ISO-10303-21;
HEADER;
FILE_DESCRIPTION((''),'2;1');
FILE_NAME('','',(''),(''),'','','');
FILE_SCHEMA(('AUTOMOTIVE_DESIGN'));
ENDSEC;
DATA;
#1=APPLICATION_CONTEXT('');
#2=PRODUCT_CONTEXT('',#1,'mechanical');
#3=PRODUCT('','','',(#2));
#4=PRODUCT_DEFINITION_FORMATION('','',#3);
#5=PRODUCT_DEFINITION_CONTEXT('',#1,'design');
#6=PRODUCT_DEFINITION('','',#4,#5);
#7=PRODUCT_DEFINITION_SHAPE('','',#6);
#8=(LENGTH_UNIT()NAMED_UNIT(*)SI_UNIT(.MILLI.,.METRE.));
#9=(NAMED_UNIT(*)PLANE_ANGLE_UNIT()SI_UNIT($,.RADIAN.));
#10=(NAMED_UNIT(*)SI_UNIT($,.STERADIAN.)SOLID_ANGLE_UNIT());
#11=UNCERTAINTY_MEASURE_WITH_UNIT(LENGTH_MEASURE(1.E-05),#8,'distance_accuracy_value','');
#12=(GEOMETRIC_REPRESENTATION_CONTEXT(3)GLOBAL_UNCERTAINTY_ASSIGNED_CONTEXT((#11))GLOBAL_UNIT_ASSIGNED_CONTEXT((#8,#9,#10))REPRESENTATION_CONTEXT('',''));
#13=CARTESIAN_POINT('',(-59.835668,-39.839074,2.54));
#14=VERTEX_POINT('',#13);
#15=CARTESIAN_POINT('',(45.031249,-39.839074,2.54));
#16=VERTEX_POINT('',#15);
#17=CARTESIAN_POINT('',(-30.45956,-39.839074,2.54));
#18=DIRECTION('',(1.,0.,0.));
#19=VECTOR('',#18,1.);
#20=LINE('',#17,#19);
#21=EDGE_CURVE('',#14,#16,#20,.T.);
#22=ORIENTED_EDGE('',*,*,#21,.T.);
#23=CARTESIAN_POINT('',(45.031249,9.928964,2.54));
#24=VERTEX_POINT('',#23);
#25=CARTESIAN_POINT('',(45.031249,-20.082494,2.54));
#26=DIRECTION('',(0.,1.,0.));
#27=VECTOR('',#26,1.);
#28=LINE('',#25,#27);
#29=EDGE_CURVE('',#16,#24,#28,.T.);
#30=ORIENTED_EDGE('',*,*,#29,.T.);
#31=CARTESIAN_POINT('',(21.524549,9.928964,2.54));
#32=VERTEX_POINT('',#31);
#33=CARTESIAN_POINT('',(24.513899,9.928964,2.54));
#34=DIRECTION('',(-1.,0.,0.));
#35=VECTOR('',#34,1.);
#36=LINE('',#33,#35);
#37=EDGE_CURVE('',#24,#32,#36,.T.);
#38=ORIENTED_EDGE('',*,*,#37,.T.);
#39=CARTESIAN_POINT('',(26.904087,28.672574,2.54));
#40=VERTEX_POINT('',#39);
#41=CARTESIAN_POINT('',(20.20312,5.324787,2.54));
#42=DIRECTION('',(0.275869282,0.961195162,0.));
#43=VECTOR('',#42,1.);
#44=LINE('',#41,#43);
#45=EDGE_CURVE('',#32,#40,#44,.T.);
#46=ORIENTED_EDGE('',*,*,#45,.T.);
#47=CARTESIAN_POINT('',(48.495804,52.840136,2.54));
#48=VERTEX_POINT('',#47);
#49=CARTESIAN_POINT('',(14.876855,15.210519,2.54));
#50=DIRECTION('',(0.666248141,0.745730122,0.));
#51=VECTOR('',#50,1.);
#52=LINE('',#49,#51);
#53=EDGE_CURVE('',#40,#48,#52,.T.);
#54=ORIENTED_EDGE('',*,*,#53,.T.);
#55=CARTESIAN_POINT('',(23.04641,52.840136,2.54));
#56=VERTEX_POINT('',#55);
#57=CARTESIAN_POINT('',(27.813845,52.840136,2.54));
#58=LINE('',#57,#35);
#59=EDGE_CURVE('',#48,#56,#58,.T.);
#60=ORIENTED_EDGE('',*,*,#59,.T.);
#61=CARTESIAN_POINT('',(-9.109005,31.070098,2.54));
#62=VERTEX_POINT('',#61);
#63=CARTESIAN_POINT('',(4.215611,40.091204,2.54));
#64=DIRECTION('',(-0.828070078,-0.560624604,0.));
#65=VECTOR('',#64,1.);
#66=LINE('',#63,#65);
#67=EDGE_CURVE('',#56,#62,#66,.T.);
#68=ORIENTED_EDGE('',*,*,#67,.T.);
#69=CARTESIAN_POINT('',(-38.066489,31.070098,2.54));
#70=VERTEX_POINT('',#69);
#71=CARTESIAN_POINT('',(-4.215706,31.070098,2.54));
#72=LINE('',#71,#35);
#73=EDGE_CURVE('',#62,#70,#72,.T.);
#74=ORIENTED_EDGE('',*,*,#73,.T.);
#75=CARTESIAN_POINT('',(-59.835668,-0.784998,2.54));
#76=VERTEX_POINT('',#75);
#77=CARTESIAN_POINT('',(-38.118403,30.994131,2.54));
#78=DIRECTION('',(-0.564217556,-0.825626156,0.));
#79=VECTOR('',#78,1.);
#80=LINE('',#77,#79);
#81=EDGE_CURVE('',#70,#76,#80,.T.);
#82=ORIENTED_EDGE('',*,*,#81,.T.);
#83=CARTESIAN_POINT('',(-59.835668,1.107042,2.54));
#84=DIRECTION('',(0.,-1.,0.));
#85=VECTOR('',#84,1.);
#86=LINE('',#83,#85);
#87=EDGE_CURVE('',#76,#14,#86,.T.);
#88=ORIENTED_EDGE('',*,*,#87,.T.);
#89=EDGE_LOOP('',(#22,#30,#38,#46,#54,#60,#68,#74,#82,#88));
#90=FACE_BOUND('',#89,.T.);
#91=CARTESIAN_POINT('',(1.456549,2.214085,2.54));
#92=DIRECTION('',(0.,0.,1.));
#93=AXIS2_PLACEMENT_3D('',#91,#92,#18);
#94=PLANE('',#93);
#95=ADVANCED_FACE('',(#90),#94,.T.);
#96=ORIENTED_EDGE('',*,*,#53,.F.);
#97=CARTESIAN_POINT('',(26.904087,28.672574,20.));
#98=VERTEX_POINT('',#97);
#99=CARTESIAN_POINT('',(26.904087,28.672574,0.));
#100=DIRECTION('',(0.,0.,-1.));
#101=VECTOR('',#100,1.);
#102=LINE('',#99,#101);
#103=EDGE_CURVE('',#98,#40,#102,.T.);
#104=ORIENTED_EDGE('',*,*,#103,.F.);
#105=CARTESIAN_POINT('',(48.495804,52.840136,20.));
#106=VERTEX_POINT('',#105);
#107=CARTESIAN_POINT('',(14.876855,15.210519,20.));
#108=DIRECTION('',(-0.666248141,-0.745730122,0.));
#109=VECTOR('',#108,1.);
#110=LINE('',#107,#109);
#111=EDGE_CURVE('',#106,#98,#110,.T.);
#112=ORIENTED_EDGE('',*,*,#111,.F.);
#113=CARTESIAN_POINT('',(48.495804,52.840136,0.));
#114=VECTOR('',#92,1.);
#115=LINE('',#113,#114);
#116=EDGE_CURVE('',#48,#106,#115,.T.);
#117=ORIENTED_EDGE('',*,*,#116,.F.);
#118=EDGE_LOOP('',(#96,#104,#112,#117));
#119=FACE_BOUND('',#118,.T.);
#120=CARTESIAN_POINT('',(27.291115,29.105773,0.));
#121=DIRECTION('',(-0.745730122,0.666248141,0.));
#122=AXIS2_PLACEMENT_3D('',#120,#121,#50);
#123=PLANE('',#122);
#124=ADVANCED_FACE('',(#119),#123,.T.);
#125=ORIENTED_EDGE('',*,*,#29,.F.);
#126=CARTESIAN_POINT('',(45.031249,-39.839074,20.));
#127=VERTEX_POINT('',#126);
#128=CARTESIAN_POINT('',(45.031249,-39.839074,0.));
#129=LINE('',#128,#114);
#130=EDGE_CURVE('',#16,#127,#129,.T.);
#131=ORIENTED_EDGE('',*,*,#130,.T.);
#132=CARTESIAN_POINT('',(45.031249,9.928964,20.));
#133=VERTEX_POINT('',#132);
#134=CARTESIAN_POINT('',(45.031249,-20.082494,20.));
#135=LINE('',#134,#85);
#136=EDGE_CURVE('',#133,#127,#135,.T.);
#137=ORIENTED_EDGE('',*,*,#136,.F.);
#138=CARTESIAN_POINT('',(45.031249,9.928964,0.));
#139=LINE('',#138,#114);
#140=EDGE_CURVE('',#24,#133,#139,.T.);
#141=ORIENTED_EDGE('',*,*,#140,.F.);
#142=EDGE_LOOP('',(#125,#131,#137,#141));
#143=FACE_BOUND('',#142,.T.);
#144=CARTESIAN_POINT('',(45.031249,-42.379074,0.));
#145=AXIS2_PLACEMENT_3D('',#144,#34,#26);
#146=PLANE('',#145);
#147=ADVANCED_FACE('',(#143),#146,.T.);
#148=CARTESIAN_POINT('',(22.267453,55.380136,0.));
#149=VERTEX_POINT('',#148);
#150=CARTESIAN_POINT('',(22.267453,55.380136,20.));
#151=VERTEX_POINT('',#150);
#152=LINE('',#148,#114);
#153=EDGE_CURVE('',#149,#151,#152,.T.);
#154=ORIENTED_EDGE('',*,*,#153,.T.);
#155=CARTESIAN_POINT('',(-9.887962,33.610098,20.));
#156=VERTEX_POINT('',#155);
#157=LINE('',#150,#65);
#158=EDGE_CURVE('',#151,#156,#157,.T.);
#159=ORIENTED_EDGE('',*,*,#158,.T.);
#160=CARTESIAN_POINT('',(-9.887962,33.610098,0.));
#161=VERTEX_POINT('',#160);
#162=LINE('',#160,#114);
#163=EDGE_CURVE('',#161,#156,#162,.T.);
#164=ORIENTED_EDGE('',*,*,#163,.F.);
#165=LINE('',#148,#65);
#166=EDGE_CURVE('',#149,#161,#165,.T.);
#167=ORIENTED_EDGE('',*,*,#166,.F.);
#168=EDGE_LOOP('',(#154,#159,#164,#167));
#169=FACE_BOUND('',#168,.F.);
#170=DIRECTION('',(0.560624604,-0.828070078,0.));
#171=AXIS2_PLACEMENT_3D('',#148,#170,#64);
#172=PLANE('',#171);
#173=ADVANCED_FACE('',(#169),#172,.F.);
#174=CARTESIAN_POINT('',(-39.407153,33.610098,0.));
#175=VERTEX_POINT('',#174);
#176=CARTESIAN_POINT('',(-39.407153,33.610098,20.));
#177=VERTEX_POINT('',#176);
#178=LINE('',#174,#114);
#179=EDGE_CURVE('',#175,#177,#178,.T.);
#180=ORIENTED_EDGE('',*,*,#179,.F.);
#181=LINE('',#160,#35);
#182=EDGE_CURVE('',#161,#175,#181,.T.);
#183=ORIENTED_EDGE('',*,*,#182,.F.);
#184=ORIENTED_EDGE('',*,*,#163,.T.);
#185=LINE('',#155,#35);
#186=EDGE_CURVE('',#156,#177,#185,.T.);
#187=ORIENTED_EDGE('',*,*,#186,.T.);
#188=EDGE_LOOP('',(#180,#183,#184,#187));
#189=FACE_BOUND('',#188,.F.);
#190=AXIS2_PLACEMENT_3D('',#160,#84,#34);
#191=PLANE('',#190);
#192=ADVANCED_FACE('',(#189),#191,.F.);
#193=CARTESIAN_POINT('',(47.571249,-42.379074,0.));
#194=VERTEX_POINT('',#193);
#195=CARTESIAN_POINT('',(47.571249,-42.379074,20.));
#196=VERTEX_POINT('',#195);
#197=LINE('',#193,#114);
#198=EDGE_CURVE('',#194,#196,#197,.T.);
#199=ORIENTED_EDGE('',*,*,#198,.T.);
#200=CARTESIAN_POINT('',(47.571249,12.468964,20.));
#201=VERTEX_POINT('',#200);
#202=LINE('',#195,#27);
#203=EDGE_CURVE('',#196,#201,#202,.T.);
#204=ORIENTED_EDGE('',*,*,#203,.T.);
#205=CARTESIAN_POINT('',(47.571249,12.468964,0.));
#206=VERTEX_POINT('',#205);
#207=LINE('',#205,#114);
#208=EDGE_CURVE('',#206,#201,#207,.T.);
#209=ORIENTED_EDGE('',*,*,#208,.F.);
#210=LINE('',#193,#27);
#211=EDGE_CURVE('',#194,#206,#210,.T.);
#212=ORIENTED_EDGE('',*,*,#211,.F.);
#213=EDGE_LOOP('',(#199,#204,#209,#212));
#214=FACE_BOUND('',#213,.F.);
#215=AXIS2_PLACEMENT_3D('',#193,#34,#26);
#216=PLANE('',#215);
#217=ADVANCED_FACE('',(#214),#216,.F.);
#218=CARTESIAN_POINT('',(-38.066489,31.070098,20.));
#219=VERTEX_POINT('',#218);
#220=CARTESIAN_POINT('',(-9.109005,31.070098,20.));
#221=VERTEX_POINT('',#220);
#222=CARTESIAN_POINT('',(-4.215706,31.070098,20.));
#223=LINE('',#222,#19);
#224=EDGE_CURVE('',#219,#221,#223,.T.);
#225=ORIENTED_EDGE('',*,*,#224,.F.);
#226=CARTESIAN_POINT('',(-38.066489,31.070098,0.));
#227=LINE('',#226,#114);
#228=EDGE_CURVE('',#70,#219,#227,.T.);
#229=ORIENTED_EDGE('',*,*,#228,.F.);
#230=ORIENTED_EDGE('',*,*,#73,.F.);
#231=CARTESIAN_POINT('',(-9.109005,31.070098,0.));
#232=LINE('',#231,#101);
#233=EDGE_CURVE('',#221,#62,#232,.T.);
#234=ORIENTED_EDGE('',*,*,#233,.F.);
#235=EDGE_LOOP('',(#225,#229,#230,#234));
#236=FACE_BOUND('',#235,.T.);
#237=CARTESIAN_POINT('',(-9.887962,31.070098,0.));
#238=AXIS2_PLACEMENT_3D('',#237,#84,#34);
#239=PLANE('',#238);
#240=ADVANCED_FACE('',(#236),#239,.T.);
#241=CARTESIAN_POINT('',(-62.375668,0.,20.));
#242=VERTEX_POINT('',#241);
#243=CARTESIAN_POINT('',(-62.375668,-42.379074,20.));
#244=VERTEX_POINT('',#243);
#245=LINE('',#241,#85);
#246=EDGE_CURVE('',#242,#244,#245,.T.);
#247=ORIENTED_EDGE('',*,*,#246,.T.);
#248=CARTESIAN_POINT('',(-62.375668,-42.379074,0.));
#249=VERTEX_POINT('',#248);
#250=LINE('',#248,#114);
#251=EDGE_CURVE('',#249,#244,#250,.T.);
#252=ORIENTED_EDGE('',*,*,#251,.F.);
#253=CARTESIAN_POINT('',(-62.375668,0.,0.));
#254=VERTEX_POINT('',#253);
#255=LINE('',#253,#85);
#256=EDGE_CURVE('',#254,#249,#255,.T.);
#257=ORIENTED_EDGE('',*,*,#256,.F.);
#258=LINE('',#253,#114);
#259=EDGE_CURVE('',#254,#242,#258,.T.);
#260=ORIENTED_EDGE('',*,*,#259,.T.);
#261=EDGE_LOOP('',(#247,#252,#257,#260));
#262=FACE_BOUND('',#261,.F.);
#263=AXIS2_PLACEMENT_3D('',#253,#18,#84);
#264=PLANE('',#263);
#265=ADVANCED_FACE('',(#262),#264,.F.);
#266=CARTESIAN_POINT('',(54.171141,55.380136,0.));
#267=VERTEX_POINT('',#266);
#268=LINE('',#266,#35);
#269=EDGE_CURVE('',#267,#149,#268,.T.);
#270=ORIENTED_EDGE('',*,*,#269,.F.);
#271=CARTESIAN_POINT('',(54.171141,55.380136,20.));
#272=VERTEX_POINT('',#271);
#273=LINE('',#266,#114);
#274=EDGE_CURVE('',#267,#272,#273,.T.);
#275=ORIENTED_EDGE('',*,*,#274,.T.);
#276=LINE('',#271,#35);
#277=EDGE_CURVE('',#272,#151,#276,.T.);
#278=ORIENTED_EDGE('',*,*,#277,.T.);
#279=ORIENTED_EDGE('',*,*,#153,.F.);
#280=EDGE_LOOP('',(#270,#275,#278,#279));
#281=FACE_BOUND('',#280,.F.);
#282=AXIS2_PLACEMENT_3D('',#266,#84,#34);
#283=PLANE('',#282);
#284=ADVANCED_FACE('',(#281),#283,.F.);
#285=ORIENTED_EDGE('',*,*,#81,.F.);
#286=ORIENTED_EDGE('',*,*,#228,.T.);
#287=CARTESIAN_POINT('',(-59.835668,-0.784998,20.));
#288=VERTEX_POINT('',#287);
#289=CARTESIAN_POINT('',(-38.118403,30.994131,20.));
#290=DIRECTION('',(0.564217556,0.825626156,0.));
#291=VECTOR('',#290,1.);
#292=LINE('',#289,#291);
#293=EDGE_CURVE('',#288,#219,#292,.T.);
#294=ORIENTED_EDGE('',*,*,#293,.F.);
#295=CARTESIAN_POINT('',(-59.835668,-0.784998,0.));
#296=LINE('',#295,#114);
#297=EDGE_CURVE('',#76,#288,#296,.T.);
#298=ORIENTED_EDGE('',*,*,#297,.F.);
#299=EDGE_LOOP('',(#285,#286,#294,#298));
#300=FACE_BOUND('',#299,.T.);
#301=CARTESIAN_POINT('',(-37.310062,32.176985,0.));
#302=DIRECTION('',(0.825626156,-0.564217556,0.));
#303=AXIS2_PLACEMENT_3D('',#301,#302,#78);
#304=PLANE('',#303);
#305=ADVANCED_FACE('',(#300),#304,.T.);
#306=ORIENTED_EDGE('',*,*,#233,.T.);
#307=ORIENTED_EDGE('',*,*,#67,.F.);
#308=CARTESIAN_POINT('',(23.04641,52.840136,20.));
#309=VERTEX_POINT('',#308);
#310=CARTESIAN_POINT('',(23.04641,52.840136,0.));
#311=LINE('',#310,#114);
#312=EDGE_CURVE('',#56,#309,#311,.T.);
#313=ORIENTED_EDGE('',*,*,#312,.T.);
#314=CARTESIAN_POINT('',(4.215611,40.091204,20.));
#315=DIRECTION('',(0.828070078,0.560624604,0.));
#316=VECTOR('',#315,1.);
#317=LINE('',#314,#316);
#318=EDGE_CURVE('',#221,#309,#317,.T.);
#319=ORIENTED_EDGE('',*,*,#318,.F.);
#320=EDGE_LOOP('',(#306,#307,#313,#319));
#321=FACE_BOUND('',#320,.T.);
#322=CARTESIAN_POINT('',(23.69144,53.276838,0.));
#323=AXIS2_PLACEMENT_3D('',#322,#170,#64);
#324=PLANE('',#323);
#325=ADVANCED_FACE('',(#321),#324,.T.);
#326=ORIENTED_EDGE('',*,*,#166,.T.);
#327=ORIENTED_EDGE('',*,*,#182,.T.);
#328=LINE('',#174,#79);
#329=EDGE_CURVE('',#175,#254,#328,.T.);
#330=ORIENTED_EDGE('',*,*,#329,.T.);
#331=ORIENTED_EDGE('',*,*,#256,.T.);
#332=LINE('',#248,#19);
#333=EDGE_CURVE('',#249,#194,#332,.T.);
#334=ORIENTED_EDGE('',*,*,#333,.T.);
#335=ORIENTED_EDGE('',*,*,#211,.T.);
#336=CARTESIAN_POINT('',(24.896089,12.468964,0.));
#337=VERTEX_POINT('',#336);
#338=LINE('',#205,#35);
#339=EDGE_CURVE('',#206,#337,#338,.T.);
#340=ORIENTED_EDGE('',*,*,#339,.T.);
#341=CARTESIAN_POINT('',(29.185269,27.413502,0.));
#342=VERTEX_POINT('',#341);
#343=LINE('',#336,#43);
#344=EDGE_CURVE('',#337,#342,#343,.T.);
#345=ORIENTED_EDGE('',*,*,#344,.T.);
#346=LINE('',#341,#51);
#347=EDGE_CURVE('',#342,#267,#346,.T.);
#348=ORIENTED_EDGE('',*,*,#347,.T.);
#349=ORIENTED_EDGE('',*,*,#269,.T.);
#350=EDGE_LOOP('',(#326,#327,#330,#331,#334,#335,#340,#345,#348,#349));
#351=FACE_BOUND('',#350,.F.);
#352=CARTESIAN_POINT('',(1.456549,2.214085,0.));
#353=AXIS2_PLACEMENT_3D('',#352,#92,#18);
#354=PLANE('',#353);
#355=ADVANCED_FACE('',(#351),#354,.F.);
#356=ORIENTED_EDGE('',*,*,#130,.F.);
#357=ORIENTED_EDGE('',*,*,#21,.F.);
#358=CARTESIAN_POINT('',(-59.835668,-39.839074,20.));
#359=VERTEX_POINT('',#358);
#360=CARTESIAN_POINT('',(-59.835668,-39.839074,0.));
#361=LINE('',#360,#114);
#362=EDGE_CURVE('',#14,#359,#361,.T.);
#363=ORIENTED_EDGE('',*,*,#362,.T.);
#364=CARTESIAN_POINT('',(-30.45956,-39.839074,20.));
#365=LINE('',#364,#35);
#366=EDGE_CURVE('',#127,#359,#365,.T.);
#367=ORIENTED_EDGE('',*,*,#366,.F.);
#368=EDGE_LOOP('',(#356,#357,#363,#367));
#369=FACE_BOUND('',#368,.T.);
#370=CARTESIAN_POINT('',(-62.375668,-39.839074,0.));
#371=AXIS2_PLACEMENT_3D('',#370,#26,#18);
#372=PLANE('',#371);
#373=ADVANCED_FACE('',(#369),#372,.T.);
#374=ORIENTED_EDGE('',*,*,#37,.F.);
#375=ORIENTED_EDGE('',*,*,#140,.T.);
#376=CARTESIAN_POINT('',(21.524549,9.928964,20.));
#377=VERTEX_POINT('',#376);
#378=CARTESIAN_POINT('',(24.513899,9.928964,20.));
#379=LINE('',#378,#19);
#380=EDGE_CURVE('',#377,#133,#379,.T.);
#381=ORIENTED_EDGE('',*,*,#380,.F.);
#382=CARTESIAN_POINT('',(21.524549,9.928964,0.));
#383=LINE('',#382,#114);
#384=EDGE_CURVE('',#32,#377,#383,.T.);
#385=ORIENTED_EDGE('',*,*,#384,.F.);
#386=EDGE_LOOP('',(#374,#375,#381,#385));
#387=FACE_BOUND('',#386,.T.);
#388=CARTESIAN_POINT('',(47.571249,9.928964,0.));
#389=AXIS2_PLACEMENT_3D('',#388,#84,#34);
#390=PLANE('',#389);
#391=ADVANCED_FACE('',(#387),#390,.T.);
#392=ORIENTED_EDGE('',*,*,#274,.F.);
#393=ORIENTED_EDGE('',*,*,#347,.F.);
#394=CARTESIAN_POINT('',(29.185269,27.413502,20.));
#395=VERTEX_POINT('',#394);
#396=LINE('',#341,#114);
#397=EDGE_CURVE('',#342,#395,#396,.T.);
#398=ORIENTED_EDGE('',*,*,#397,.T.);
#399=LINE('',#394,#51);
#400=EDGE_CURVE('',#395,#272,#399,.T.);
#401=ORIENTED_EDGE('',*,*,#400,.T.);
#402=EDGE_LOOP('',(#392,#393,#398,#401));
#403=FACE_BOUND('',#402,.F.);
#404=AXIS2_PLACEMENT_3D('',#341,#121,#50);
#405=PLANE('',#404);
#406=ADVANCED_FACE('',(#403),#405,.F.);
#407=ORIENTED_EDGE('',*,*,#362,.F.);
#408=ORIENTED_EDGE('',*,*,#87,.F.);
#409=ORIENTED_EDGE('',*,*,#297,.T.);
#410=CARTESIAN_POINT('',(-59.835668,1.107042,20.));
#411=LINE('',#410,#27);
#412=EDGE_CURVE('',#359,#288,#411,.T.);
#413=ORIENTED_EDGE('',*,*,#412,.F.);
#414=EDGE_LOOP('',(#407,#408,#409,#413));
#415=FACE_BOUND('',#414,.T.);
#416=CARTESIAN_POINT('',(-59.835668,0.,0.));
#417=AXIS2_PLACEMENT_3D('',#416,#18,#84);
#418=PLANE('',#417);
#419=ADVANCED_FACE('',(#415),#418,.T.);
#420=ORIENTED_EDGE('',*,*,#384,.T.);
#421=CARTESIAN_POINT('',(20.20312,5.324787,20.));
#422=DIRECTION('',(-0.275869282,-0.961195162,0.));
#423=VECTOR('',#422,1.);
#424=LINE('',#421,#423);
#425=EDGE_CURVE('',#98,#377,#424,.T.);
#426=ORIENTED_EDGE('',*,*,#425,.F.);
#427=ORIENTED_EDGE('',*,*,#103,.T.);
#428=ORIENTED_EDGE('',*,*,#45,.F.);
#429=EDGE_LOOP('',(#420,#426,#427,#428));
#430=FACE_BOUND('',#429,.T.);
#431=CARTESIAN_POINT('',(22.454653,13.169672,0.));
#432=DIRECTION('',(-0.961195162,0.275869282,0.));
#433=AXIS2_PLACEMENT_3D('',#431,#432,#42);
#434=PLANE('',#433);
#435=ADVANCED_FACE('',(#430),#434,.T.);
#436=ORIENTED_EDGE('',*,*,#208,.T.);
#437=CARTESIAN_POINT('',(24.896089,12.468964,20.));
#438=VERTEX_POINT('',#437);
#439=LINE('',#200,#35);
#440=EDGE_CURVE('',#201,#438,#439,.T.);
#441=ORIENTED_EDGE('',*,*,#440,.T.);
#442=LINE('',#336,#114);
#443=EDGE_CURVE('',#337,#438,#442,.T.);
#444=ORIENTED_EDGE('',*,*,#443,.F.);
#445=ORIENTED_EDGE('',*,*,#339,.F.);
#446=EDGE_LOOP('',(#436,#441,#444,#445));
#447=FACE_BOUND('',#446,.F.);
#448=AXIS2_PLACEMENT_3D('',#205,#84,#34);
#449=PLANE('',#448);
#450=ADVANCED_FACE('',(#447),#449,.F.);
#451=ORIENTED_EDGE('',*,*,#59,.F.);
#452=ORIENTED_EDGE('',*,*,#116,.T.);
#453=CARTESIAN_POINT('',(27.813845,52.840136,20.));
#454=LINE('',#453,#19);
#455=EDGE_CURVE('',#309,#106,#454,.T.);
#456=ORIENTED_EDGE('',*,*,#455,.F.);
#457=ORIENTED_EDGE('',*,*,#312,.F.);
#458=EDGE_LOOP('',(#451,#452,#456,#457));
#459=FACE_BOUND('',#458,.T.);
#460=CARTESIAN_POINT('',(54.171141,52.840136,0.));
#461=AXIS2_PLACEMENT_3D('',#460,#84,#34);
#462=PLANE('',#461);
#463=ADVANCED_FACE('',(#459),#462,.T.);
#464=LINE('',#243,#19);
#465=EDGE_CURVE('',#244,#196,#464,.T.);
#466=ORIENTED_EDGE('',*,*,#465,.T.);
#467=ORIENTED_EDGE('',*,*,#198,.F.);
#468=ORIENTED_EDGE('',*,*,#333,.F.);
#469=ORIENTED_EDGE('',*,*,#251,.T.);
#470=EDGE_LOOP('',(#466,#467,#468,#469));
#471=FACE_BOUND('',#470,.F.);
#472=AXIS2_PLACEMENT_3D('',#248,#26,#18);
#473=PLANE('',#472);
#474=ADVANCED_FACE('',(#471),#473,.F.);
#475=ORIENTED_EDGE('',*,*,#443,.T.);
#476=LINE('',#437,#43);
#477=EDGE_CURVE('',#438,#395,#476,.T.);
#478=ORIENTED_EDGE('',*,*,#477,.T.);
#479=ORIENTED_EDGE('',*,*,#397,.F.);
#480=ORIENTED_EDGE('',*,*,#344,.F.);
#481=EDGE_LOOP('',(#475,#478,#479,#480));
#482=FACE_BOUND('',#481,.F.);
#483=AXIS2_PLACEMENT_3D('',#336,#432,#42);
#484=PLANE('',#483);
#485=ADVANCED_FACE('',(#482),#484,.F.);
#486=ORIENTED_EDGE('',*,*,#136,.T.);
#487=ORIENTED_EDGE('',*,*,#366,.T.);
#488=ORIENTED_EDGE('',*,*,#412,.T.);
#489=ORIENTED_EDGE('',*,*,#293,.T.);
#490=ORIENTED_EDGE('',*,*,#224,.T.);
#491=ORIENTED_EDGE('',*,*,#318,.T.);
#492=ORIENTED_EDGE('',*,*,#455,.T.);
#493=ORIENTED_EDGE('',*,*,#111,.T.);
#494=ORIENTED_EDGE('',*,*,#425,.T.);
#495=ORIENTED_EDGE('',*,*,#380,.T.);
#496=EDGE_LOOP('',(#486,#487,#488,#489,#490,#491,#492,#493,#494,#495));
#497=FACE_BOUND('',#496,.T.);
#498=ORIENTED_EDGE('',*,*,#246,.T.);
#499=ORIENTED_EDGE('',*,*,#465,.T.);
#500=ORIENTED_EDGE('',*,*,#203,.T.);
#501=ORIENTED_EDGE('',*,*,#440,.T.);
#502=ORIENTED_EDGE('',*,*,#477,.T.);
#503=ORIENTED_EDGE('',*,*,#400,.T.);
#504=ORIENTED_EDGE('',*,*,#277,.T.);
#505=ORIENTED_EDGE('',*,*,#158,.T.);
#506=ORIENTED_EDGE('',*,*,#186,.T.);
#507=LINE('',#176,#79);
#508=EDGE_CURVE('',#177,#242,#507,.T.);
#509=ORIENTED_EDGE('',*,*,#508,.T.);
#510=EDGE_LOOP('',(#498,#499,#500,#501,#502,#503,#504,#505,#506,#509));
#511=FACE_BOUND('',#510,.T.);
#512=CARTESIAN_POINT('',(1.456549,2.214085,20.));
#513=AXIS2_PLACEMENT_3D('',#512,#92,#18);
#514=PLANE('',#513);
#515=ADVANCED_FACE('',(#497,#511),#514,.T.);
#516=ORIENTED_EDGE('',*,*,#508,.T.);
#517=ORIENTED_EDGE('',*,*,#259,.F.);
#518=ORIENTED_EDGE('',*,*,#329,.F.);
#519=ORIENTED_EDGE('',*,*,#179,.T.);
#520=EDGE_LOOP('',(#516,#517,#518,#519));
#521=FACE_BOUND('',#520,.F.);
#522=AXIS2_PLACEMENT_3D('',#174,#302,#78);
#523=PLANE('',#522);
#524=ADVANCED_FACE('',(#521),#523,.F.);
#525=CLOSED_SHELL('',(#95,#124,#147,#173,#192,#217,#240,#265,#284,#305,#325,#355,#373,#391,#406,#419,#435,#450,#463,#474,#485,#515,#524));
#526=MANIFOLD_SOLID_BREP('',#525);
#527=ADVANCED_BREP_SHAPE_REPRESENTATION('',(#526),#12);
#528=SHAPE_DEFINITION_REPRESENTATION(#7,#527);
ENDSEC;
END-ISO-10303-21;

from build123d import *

# Parameters (mm, degrees)
F1_DEPTH = 20
F2_T     = -2.54


with BuildPart() as f1:
    # F0 (on Top) → F1 (new body)
    with BuildSketch(Plane.XY):
        Polygon((24.8960889876, 12.4689638615), (29.1852690279, 27.4135023355), (54.171141237, 55.3801357746), (22.2674533725, 55.3801357746), (-9.8879616708, 33.6100980639), (-39.4071526825, 33.6100980639), (-62.3756684363, 0), (-62.3756684363, -42.3790737987), (47.5712493062, -42.3790737987), (47.5712493062, 12.4689638615), align=None)
    extrude(amount=F1_DEPTH)

    # F2
    f2_openings = [f1.faces().sort_by_distance(p)[0] for p in [
        (-4.22795, -2.107401, 20),
    ]]
    offset(amount=F2_T, openings=f2_openings, kind=Kind.INTERSECTION)


solid = f1.part
